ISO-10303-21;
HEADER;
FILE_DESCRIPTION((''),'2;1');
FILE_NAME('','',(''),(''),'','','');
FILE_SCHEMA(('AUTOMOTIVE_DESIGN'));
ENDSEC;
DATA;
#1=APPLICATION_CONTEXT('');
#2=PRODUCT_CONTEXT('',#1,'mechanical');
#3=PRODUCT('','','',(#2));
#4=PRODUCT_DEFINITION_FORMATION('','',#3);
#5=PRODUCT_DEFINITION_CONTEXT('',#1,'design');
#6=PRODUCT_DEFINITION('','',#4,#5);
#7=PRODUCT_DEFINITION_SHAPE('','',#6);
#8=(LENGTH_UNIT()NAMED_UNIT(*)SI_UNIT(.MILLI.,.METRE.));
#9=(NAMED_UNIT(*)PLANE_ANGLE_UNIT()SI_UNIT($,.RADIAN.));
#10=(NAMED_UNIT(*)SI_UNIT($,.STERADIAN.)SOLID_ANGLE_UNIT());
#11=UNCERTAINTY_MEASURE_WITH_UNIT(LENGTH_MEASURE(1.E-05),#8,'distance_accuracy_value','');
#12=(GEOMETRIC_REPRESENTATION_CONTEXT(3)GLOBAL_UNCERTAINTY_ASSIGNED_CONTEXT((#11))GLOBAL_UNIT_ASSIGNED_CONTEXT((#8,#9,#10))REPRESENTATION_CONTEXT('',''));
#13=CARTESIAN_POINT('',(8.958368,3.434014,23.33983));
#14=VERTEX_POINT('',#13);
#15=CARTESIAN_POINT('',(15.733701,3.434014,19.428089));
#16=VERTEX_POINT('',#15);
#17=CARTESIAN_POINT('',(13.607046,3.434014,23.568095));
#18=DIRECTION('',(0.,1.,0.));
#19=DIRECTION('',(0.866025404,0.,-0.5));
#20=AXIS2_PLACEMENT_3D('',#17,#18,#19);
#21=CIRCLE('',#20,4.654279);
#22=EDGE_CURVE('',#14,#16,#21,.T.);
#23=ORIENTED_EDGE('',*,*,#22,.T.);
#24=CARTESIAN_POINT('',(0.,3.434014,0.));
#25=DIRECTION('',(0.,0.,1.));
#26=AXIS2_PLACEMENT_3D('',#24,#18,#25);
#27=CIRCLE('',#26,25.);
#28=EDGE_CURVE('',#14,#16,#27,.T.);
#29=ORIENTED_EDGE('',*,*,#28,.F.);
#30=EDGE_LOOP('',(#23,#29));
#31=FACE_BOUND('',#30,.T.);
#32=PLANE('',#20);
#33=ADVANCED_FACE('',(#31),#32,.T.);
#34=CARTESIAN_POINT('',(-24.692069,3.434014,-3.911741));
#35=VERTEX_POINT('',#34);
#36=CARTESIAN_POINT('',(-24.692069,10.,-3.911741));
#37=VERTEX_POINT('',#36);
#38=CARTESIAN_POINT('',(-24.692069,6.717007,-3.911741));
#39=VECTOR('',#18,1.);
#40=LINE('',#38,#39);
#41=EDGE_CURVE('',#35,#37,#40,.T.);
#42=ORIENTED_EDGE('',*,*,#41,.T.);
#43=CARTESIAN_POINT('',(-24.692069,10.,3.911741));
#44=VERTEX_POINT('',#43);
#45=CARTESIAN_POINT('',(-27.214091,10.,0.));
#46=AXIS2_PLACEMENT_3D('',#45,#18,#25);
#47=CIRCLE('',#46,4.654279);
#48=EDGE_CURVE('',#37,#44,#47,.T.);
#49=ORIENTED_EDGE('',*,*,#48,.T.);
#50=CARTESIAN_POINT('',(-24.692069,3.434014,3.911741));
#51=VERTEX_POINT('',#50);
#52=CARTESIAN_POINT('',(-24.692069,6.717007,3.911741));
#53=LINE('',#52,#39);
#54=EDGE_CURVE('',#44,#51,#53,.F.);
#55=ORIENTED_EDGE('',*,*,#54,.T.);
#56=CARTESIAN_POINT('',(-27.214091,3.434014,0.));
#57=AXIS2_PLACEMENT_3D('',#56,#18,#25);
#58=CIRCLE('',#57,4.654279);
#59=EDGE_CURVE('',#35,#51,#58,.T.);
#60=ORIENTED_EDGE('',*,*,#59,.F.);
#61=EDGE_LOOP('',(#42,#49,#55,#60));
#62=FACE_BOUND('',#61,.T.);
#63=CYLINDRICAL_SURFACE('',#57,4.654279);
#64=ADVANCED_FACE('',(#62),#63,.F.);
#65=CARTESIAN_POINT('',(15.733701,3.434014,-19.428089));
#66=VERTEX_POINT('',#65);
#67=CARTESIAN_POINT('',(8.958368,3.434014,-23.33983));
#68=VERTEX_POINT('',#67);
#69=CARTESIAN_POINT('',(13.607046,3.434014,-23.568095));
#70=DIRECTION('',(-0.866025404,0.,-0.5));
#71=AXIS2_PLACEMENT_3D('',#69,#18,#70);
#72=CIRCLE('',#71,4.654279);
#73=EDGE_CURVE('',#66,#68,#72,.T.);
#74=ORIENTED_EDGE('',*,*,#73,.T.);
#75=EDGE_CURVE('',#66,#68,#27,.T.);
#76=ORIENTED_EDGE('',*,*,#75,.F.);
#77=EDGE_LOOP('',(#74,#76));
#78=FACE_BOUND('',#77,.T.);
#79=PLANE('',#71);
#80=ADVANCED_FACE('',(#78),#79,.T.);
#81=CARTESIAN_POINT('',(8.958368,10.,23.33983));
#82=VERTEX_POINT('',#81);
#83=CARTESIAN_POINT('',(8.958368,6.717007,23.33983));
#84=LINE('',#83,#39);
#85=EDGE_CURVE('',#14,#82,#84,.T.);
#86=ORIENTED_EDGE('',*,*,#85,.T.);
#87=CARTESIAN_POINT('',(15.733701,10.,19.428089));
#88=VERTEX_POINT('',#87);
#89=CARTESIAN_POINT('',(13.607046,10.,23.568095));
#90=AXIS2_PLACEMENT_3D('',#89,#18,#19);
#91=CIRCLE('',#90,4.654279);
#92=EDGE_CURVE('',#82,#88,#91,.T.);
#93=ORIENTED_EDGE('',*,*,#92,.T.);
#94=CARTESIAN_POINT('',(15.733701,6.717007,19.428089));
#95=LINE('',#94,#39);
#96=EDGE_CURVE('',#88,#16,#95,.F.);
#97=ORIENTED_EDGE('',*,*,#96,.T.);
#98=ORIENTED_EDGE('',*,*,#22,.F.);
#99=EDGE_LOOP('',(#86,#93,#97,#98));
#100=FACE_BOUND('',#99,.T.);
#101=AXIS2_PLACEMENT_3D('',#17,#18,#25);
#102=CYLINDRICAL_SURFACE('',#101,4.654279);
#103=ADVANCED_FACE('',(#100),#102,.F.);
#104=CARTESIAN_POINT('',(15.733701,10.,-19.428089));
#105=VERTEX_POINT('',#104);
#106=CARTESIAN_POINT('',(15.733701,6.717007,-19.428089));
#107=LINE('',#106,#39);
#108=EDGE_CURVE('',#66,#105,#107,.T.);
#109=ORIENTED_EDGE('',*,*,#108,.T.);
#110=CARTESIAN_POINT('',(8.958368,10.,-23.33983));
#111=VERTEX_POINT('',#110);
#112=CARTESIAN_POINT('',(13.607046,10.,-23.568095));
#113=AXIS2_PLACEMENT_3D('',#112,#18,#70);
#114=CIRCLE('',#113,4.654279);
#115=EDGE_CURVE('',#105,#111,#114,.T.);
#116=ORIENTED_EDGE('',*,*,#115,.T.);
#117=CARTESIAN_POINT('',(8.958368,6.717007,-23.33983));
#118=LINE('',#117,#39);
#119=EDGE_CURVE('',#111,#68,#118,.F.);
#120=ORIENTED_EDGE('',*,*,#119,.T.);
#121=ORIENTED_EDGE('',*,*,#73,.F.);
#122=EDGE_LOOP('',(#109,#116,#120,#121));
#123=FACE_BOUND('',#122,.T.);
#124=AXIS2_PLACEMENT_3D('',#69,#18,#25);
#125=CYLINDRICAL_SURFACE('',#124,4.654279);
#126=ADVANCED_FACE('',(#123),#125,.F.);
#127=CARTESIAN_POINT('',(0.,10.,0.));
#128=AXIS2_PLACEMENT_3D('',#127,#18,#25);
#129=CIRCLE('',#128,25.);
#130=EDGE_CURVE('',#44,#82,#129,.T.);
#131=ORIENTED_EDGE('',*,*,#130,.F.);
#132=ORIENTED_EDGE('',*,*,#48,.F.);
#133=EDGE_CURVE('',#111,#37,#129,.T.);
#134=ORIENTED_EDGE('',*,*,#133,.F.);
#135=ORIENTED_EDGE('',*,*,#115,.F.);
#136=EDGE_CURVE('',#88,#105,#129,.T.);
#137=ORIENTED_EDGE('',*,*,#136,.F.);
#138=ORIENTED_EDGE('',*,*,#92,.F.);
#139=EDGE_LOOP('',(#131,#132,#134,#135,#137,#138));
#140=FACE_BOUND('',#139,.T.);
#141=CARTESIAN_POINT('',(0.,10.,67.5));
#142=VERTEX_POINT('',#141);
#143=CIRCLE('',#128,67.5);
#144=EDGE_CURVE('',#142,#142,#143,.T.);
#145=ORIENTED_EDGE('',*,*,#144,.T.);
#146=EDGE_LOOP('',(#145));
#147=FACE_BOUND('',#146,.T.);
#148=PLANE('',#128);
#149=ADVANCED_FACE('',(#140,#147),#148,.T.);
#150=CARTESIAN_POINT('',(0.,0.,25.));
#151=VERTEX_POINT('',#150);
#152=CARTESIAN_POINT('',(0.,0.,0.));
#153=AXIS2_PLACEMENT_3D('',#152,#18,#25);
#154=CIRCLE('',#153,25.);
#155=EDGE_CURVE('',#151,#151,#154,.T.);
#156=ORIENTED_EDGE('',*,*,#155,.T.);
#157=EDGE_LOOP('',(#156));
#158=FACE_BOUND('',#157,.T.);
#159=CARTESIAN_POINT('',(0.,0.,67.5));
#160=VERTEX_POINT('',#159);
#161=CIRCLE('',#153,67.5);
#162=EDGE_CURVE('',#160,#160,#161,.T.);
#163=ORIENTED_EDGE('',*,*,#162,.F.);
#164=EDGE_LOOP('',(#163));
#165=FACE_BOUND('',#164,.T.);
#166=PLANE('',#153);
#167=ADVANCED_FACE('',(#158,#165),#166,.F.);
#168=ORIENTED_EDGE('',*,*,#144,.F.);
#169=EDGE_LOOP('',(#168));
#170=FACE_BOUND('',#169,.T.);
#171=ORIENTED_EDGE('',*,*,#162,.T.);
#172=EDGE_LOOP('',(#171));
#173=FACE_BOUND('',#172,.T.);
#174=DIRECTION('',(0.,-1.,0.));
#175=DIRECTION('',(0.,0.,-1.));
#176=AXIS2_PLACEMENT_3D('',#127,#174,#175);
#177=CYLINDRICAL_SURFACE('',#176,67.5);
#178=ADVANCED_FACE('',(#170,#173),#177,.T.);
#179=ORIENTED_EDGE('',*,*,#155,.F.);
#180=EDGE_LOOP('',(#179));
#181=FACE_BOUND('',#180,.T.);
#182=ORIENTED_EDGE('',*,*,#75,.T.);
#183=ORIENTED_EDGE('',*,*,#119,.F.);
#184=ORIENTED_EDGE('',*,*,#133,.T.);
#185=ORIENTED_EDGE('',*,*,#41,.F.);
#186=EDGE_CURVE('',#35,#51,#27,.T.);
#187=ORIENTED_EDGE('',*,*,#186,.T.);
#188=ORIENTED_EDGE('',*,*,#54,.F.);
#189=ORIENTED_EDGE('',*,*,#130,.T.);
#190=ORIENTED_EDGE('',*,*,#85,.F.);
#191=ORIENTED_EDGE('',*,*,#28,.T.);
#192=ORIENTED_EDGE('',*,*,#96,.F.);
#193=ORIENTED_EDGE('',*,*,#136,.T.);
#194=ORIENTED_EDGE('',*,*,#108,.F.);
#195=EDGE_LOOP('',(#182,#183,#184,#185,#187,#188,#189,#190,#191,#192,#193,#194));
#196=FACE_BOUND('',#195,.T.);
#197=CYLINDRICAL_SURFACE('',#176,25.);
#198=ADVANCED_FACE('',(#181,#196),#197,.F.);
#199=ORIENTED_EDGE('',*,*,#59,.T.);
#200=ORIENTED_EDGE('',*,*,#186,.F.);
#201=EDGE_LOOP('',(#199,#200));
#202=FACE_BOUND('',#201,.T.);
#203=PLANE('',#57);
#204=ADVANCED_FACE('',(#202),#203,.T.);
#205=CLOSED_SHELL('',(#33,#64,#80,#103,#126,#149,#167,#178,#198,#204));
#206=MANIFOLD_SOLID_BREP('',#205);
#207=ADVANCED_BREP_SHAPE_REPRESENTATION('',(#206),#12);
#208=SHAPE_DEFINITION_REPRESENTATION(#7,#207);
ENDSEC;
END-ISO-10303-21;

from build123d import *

# Parameters (mm, degrees)
SKETCH1_R           = 67.5
BOSS_EXTRUDE1_DEPTH = 10
SKETCH2_R           = 25
CUT_EXTRUDE1_DEPTH  = 96.981769102
SKETCH3_R           = 4.654278871
CUT_EXTRUDE2_DEPTH  = 6.565986195
CIRPATTERN1_COUNT   = 3


with BuildPart() as part:
    # Sketch1 → Boss-Extrude1 (new body)
    with BuildSketch(Plane(origin=(0, 0, 0), x_dir=(1, 0, 0), z_dir=(0, 1, 0))):
        Circle(SKETCH1_R)
    extrude(amount=BOSS_EXTRUDE1_DEPTH)

    # Sketch2 → Cut-Extrude1 (cut, through all)
    with BuildSketch(Plane(origin=(0, 0, 0), x_dir=(1, 0, 0), z_dir=(0, 1, 0))):
        Circle(SKETCH2_R)
    extrude(amount=CUT_EXTRUDE1_DEPTH, mode=Mode.SUBTRACT)

    # Sketch3 → Cut-Extrude2 (cut)
    with BuildSketch(Plane(origin=(0, 10, 0), x_dir=(1, 0, 0), z_dir=(0, 1, 0))):
        with Locations((-27.214091482, 0)):
            Circle(SKETCH3_R)
    cut_extrude2 = extrude(amount=-CUT_EXTRUDE2_DEPTH, mode=Mode.SUBTRACT)

    # CirPattern1: Cut-Extrude2 ×3 about axis
    cirpattern1_axis = Axis((0, 0, 0), (0, 1, 0))
    for i in range(1, CIRPATTERN1_COUNT):
        add(cut_extrude2.rotate(cirpattern1_axis, i * 360 / CIRPATTERN1_COUNT), mode=Mode.SUBTRACT)


solid = part.part
